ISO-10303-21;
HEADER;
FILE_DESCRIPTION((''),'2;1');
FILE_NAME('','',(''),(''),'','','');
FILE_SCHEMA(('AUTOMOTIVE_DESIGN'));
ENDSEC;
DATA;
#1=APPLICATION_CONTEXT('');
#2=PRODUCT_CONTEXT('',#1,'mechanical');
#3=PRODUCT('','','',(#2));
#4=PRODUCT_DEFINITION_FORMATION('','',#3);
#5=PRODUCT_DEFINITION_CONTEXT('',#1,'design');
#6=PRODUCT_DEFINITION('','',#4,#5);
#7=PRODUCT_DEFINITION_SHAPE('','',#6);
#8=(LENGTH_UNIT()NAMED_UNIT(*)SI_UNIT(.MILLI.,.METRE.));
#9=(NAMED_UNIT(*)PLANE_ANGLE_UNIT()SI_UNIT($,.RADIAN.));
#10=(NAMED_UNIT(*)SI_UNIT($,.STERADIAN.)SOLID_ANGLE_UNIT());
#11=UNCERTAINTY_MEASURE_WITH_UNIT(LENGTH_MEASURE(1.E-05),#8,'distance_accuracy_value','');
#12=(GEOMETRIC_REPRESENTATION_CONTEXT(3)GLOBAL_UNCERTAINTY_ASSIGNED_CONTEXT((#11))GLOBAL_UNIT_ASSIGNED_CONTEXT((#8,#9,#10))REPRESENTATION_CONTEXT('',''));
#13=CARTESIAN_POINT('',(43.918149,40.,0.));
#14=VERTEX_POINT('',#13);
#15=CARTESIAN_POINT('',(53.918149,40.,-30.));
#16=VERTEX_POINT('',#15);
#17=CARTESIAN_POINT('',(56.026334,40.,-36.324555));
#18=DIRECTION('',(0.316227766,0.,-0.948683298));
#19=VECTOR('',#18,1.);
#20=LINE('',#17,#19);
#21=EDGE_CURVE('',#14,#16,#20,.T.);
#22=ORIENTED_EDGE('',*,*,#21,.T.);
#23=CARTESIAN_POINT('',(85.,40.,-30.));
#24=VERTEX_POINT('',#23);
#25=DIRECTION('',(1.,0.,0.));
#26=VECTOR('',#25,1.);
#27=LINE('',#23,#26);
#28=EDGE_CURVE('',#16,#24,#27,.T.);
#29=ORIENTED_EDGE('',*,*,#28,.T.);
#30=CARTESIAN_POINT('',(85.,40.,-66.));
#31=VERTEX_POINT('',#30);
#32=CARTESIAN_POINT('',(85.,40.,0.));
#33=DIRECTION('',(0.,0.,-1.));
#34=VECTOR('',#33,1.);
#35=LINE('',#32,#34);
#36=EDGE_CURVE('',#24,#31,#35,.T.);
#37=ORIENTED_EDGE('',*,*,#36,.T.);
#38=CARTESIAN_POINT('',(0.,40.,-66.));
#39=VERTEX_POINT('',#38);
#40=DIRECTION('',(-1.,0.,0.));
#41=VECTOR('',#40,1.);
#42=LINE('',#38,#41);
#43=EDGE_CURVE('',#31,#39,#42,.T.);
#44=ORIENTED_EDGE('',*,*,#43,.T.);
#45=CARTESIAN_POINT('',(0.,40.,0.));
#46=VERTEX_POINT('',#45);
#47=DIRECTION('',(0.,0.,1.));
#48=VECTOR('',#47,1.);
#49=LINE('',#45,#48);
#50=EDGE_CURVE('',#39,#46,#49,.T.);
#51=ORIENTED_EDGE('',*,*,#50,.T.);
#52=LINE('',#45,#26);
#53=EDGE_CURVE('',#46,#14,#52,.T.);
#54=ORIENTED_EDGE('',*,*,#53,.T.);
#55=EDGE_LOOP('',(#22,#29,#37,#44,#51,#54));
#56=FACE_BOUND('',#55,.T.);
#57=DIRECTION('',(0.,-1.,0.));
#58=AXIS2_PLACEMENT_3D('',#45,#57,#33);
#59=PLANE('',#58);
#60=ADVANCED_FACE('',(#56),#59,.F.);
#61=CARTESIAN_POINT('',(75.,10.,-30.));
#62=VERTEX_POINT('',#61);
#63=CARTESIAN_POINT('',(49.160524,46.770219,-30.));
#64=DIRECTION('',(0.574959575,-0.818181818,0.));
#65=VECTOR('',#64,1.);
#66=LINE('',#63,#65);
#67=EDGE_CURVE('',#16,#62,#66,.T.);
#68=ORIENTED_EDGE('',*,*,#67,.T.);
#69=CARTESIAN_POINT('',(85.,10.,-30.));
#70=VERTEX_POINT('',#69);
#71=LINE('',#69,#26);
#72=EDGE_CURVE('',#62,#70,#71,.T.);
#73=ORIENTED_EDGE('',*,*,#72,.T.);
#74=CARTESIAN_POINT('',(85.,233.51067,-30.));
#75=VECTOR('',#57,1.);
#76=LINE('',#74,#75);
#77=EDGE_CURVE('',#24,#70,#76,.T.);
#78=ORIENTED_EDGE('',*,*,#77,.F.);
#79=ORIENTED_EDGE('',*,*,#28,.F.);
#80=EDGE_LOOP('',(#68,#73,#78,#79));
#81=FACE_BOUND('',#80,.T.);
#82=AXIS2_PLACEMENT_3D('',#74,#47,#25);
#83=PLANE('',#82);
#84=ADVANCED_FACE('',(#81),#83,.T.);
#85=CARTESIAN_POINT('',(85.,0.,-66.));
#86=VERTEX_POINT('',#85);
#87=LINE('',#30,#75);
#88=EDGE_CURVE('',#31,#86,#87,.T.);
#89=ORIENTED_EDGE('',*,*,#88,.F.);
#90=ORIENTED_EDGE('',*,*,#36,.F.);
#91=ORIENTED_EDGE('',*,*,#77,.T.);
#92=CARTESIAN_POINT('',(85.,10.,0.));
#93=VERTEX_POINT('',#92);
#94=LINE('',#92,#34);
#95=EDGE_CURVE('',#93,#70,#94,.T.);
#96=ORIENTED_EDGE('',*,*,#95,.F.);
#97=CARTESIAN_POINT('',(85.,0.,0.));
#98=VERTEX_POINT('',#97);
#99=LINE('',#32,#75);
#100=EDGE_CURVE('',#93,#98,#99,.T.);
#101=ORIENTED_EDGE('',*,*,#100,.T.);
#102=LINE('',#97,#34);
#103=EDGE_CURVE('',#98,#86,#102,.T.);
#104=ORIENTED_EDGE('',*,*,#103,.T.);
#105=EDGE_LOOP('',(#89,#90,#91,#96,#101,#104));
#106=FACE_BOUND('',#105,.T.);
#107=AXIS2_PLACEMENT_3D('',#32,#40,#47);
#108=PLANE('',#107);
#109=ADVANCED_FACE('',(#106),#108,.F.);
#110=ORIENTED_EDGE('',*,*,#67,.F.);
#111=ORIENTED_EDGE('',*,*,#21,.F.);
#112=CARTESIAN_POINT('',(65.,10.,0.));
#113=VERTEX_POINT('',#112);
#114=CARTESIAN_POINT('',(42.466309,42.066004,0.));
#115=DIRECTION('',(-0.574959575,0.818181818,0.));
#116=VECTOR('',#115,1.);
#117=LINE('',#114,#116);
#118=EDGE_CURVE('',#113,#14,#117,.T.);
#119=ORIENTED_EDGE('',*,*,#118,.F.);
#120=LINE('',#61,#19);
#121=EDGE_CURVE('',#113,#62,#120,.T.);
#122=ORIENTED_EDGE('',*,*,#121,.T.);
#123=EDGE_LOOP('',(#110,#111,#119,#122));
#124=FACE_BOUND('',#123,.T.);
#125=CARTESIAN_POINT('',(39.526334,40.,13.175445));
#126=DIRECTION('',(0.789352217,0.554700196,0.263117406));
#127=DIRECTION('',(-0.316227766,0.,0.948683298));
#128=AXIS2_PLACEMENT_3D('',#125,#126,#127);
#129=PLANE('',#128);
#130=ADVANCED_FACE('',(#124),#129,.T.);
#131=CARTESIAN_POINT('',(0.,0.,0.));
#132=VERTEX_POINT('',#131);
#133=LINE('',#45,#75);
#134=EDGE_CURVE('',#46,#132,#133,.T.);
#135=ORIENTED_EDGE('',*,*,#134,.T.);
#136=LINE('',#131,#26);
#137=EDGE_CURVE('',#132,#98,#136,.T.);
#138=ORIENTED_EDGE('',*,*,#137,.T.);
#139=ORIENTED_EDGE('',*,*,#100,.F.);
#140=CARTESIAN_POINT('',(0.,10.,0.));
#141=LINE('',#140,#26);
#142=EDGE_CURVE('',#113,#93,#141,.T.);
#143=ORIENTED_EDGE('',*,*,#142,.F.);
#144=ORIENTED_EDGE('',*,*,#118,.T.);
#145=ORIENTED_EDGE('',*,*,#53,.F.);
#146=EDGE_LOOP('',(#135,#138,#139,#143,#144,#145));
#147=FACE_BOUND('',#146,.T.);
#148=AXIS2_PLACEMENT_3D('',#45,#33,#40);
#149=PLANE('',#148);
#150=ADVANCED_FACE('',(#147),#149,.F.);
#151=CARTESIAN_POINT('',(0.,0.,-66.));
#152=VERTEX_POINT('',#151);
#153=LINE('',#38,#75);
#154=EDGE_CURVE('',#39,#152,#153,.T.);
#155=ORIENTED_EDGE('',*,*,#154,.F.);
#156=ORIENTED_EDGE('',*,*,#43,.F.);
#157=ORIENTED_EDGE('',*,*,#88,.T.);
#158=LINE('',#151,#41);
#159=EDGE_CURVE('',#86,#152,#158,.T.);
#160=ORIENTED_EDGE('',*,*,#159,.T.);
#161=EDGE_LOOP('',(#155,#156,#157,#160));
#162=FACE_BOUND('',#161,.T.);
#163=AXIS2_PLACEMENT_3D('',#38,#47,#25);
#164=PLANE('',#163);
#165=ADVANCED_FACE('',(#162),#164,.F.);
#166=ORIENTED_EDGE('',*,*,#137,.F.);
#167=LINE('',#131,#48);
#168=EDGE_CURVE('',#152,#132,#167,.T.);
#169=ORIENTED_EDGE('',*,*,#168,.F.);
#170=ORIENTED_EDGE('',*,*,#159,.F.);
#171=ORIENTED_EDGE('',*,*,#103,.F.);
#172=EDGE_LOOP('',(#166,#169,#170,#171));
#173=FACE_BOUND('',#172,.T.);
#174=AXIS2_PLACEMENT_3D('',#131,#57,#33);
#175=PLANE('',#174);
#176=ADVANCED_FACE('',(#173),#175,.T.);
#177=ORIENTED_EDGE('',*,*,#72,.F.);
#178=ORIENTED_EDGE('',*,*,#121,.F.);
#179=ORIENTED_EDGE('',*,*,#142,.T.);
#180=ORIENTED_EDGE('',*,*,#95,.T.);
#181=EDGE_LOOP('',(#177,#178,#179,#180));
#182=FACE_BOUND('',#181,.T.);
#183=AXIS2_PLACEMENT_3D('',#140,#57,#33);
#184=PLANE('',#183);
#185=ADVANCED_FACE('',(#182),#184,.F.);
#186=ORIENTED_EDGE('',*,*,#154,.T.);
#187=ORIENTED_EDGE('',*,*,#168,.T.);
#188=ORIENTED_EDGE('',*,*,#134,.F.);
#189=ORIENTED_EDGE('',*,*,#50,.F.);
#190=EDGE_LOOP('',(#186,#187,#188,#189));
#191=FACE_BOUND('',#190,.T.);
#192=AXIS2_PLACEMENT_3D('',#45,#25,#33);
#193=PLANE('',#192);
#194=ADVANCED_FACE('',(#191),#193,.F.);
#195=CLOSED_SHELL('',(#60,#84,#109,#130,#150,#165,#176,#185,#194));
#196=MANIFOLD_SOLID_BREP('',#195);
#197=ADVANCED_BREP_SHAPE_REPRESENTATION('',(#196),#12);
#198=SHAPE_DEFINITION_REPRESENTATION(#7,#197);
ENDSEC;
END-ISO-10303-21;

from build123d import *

# Parameters (mm, degrees)
SKETCH1_W               = 85
SKETCH1_H               = 66
BOSS_EXTRUDE1_DEPTH     = 40
CUT_EXTRUDE1_DEPTH      = 115.808536268
CUT_EXTRUDE1_DEPTH_BACK = 30
CHAMFER1_SIZE2          = 20
CHAMFER1_SIZE           = 30


with BuildPart() as part:
    # Sketch1 → Boss-Extrude1 (new body)
    with BuildSketch(Plane(origin=(0, 0, 0), x_dir=(1, 0, 0), z_dir=(0, 1, 0))):
        with Locations((42.5, 33)):
            Rectangle(SKETCH1_W, SKETCH1_H)
    extrude(amount=BOSS_EXTRUDE1_DEPTH)

    # Sketch3 → Cut-Extrude1 (cut, two sides: drawn at the far end of the back side and taken through both)
    with BuildSketch(Plane(origin=(0, 40, 0), x_dir=(1, 0, 0), z_dir=(0, 1, 0)).offset(-CUT_EXTRUDE1_DEPTH_BACK)):
        Polygon((280.267374354, 30), (85, 30), (75, 30), (65, 0), (3.251034432, -185.246896704), (242.87031101, -493.629763025), (519.886650932, -278.382866321), align=None)
    extrude(amount=CUT_EXTRUDE1_DEPTH + CUT_EXTRUDE1_DEPTH_BACK, mode=Mode.SUBTRACT)

    # Chamfer1
    chamfer1_edges = [part.edges().sort_by_distance(p)[0] for p in [
        (70, 40, -15),
    ]]
    chamfer1_side = [part.faces().sort_by_distance(p)[0] for p in [
        (70, 39.6, -15),
    ]]
    chamfer(chamfer1_edges, length=CHAMFER1_SIZE - 0.0001, length2=CHAMFER1_SIZE2 - 0.0001, reference=chamfer1_side[0])  # a hair under: the kernel refuses the full size


solid = part.part
